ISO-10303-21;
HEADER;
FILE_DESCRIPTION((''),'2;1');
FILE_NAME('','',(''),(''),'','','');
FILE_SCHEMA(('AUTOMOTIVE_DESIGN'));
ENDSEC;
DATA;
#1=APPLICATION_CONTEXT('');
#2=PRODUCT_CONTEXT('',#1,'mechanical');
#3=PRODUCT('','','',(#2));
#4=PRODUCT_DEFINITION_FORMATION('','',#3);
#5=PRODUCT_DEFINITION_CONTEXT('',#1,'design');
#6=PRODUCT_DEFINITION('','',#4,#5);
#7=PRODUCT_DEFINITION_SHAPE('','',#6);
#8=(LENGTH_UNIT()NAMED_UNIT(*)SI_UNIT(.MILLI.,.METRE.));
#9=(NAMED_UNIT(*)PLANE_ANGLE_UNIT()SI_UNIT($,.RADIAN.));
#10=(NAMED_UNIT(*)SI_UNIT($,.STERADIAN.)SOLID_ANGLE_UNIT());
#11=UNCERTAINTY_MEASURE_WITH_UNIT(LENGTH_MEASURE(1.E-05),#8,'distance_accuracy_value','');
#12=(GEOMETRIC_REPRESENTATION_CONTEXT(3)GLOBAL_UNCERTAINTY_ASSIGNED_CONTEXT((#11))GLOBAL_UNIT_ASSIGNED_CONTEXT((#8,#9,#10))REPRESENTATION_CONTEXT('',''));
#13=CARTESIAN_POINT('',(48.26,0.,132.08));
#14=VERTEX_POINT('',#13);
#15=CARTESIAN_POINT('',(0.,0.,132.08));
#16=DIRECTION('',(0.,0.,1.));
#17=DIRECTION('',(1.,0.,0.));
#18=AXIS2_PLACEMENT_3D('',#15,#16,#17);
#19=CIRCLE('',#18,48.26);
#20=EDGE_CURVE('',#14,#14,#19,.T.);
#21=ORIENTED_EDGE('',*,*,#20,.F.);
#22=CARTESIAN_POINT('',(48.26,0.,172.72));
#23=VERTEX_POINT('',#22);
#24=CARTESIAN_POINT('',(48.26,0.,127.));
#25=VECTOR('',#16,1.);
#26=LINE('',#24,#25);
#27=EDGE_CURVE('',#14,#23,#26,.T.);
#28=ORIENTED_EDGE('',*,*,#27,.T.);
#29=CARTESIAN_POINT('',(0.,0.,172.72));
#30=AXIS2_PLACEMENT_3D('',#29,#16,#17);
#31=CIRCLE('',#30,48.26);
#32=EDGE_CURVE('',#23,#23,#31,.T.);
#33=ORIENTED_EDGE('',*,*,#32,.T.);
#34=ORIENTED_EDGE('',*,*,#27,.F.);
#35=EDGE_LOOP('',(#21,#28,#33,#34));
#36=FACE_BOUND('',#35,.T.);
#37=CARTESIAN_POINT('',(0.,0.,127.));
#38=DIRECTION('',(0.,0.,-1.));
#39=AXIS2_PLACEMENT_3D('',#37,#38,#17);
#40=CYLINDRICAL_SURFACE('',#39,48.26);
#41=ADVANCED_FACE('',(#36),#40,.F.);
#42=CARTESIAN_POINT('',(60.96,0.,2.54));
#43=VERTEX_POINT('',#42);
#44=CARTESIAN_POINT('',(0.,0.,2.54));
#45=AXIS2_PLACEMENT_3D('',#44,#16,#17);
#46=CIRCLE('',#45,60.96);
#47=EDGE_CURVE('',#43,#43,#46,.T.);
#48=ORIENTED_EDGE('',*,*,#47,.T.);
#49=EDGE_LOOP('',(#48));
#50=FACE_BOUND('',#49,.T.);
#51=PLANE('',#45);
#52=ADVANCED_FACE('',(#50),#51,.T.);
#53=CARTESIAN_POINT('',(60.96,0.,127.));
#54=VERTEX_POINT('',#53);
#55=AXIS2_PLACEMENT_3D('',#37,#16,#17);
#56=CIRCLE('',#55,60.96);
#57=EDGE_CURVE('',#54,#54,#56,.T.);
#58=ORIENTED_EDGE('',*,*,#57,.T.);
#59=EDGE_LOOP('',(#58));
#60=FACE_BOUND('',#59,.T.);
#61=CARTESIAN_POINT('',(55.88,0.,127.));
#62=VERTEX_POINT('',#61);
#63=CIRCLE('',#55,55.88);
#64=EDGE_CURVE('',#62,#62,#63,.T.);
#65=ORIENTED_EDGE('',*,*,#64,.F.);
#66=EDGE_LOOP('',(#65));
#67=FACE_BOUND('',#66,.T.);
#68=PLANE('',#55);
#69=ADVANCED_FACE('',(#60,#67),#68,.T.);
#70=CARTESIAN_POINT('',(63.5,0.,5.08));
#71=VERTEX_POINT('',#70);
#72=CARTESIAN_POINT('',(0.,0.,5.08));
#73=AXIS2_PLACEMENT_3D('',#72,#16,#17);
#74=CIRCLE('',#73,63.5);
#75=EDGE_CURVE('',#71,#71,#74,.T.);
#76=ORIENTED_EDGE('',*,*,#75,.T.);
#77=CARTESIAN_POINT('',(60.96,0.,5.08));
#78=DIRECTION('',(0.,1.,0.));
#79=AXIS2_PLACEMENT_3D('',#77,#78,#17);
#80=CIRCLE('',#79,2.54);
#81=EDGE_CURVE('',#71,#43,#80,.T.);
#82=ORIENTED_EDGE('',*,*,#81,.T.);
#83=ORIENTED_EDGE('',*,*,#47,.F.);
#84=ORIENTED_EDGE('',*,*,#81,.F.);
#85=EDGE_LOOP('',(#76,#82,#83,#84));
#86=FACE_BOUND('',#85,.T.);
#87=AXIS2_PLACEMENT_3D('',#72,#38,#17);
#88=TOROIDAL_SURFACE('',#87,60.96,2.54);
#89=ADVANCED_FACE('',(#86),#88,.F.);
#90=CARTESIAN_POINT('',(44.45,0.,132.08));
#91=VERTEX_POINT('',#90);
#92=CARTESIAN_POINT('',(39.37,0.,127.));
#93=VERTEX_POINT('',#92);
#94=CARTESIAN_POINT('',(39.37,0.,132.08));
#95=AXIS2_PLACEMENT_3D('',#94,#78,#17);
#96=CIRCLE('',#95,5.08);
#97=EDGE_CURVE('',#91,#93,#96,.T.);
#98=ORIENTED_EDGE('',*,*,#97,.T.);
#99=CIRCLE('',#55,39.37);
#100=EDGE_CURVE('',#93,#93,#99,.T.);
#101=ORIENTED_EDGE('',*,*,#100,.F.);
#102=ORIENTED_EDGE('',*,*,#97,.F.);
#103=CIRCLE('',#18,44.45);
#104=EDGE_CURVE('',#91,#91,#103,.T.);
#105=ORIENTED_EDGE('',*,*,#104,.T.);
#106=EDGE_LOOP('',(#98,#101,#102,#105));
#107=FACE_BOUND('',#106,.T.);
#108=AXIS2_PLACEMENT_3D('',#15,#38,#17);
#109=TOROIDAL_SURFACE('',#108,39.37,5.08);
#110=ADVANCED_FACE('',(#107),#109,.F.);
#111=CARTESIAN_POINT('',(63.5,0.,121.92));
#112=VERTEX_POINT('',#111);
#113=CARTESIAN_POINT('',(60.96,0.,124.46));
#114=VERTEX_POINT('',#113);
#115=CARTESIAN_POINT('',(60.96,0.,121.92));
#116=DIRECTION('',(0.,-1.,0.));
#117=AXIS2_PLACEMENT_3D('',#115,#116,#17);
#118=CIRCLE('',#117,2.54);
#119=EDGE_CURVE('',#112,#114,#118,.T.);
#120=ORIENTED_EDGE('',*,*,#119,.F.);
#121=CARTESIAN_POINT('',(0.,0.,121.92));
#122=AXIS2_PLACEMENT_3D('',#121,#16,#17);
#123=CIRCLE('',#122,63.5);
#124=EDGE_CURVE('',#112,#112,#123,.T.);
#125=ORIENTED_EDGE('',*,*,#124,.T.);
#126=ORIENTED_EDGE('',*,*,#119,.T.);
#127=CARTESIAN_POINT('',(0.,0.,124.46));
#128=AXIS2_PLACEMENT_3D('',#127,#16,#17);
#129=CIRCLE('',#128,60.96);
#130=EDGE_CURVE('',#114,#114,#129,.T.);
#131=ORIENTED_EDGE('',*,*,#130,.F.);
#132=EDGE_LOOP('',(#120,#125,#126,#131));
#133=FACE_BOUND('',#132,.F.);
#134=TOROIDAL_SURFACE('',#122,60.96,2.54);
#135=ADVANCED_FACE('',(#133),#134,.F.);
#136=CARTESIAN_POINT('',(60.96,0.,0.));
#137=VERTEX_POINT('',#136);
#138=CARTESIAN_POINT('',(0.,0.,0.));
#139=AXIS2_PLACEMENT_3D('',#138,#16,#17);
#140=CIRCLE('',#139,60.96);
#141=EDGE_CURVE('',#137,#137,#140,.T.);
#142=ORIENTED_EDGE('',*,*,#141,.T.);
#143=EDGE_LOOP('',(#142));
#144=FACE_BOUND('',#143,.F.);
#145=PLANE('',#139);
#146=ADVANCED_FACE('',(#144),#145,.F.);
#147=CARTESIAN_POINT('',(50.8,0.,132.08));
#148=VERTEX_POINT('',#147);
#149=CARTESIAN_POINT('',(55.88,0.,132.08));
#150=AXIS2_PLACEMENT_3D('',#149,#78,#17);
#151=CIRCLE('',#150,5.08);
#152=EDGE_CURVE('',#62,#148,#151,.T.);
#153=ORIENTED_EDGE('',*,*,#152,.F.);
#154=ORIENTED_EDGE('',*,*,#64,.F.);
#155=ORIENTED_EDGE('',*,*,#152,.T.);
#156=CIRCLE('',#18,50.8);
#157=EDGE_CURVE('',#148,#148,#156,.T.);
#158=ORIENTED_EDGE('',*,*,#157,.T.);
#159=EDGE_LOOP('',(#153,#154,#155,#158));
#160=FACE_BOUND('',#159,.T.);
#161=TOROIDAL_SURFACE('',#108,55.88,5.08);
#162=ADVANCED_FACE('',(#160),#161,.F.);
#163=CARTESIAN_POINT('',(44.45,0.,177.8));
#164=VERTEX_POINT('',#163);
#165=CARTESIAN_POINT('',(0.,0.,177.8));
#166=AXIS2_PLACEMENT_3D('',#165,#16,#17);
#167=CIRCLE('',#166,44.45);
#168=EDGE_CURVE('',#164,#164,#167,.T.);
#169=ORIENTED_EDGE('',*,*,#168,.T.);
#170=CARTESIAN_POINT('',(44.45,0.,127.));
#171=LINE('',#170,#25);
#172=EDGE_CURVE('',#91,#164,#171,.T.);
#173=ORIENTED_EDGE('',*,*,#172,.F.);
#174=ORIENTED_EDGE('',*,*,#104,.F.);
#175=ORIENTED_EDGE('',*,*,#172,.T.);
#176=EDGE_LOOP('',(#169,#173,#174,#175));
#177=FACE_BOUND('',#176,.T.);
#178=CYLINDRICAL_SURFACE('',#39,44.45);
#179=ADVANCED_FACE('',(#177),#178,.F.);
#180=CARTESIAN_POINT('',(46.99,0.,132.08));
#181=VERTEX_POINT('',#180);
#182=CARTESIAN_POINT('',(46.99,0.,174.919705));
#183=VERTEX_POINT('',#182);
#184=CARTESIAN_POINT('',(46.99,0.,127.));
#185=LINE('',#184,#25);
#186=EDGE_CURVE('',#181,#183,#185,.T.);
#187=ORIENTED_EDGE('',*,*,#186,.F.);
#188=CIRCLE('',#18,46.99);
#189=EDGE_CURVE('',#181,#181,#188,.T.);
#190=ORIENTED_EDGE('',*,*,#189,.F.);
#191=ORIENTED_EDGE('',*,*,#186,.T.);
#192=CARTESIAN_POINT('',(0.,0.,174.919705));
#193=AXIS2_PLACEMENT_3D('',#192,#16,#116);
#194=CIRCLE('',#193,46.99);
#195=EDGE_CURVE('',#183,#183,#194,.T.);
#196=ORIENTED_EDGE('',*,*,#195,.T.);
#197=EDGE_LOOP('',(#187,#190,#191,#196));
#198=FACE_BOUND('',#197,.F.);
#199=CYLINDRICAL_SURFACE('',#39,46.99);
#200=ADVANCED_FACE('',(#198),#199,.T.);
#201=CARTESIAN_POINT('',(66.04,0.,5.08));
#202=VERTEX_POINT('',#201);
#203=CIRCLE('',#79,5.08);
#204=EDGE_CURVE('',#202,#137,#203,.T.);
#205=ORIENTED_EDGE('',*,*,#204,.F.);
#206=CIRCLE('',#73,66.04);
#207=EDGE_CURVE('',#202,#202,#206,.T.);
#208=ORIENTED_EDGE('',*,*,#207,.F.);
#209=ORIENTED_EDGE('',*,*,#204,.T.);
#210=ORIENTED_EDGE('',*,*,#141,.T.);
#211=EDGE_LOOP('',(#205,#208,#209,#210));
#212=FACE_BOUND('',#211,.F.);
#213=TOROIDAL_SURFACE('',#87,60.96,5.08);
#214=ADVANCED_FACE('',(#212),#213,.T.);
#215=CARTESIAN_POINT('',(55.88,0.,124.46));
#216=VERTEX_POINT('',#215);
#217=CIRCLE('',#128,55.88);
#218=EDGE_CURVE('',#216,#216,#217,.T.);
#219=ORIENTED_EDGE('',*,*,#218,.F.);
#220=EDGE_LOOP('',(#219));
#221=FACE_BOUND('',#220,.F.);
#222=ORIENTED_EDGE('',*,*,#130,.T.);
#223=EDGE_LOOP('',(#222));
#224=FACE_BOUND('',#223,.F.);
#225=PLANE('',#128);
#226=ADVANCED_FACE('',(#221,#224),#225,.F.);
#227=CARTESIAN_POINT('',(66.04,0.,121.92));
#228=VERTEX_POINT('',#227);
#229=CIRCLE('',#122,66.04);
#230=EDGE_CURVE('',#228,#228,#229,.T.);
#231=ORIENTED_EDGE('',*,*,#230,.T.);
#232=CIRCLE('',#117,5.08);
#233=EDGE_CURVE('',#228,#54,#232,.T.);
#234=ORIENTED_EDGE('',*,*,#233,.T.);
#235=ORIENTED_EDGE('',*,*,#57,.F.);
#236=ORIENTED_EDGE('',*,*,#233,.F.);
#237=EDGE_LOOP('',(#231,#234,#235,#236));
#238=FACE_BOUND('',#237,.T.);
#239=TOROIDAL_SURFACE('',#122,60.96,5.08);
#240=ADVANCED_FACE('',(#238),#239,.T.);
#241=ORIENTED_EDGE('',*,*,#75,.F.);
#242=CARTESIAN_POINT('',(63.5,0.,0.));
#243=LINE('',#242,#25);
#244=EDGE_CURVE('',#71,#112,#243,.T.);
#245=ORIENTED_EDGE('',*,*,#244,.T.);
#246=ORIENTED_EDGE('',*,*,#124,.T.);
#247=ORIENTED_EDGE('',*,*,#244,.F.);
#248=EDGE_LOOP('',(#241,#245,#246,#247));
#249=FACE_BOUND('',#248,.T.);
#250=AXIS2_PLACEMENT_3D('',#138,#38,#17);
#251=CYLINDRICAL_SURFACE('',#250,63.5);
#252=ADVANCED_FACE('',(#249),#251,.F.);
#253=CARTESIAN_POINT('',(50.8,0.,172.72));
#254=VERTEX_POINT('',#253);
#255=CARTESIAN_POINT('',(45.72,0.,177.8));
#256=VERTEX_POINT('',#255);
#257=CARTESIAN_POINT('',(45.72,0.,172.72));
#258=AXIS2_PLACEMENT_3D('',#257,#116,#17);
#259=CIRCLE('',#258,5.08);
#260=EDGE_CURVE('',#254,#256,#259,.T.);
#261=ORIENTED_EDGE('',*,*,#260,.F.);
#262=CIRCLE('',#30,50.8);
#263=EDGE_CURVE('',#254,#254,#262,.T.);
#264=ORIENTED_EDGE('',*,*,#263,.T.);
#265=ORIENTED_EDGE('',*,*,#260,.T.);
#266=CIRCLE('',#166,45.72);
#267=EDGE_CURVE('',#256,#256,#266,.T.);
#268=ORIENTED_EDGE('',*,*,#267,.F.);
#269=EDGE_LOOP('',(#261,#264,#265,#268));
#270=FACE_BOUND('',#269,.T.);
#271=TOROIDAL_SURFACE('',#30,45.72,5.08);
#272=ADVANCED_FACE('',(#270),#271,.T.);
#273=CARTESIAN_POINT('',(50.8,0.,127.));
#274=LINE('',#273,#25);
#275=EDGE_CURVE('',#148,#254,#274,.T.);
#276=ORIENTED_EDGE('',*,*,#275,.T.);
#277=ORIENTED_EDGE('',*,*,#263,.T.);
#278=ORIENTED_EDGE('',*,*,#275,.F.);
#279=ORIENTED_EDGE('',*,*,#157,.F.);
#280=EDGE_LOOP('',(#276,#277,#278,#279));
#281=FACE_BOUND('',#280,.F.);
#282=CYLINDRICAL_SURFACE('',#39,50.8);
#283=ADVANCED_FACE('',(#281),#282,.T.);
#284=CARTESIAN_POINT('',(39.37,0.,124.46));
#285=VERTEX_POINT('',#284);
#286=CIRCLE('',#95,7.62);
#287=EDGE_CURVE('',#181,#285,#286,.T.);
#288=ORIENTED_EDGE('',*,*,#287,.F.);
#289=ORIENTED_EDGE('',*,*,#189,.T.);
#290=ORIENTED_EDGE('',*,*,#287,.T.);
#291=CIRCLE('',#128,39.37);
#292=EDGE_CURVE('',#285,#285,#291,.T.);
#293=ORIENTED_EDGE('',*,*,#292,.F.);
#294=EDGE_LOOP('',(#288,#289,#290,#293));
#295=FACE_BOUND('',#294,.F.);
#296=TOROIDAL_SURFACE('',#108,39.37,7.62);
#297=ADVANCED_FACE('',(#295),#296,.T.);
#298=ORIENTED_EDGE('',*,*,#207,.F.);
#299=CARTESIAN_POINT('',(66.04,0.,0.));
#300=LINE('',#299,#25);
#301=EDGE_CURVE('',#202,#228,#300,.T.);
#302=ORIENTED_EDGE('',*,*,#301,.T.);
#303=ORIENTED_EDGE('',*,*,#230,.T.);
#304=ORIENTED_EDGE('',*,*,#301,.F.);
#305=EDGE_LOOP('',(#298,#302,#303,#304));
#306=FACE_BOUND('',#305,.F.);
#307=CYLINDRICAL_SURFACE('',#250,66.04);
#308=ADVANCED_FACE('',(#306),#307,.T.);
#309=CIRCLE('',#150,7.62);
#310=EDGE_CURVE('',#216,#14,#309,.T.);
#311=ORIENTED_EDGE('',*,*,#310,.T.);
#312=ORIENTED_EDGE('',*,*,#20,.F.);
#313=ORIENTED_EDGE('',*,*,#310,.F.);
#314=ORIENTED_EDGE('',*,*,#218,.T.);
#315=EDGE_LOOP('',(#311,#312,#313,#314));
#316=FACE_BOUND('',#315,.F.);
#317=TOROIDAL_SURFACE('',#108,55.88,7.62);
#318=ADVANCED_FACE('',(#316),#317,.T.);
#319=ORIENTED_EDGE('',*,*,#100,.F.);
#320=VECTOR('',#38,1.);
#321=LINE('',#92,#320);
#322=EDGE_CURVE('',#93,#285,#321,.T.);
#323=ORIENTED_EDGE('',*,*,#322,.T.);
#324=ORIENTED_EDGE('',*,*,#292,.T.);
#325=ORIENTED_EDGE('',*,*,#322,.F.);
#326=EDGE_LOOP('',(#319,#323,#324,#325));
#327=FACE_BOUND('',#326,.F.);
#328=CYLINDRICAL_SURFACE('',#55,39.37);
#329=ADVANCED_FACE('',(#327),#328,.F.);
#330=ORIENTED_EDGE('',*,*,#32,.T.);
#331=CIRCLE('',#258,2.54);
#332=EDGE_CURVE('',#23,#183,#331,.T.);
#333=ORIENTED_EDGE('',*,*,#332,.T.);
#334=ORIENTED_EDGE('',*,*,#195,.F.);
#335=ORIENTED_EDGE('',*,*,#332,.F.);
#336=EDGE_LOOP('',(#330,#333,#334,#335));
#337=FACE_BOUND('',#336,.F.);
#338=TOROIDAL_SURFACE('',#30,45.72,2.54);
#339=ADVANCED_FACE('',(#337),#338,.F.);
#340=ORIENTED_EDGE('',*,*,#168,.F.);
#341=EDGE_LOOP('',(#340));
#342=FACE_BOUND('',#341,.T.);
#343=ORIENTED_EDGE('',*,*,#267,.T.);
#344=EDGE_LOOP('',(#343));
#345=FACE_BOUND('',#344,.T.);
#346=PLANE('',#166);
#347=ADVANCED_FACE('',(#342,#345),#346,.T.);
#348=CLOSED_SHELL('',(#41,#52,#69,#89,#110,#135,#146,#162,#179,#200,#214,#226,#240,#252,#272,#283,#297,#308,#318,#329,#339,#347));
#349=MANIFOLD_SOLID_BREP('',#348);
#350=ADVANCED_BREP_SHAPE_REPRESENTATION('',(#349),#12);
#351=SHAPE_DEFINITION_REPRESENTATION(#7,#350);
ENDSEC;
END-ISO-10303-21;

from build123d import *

# Parameters (mm, degrees)
F0_R     = 66.04
F1_DEPTH = 127
F2_R     = 5.08
F3_R     = 50.8
F3_R_2   = 44.45
F4_DEPTH = 50.8
F5_R     = 5.08
F6_T     = 2.54


# Not quite as in the source:
# - a shell that OpenCascade refuses in one call is made with other operations: the cavity is built on its own and cut out


with BuildPart() as f1:
    # F0 (on Top) → F1 (new body)
    with BuildSketch(Plane.XY):
        Circle(F0_R)
    extrude(amount=F1_DEPTH)

    # F2
    f2_edges = [f1.edges().sort_by_distance(p)[0] for p in [
        (-66.04, 0, 127),
        (-66.04, 0, 0),
    ]]
    fillet(f2_edges, radius=F2_R)

    # F3 (on face) → F4 (join)
    with BuildSketch(Plane.XY.offset(127)):
        Circle(F3_R)
        Circle(F3_R_2, mode=Mode.SUBTRACT)
    extrude(amount=F4_DEPTH)

    # F5
    f5_edges = [f1.edges().sort_by_distance(p)[0] for p in [
        (50.8, 0, 152.4),
        (-50.8, 0, 127),
        (-50.8, 0, 177.8),
        (-44.45, 0, 127),
    ]]
    fillet(f5_edges, radius=F5_R)

    # F6: shell of thickness 2.54, made by hand


with BuildPart() as f6_core1:
    # F6_t2: copy of F1
    add(f1.part)

    # the walls: a layer under each face that stays
    f6_faces = [f6_core1.faces().sort_by_distance(p)[0] for p in [
        (-40.64, -40.64, 127),
        (-52.2878975516, 0, 128.4878975516),
        (-64.5521024484, 0, 125.5121024484),
        (-50.8, 0, 152.4),
        (-66.04, 0, 63.5),
        (-49.3121024484, 0, 176.3121024484),
        (-64.5521024484, 0, 1.4878975516),
        (40.005, -22.0133333333, 177.8),
        (0, 0, 0),
        (-44.45, 0, 154.94),
        (-42.9621024484, 0, 128.4878975516),
    ]]
    thicken(f6_faces, amount=-F6_T, mode=Mode.SUBTRACT)


with BuildPart() as f1_1:
    add(f1.part)

    # what is left inside the walls is the cavity
    f6_cavity = [f6_core1.part.solids().sort_by_distance(p)[0] for p in [
        (-63.4746, 0, 82.973333),
    ]]
    add(f6_cavity, mode=Mode.SUBTRACT)


solid = f1_1.part
